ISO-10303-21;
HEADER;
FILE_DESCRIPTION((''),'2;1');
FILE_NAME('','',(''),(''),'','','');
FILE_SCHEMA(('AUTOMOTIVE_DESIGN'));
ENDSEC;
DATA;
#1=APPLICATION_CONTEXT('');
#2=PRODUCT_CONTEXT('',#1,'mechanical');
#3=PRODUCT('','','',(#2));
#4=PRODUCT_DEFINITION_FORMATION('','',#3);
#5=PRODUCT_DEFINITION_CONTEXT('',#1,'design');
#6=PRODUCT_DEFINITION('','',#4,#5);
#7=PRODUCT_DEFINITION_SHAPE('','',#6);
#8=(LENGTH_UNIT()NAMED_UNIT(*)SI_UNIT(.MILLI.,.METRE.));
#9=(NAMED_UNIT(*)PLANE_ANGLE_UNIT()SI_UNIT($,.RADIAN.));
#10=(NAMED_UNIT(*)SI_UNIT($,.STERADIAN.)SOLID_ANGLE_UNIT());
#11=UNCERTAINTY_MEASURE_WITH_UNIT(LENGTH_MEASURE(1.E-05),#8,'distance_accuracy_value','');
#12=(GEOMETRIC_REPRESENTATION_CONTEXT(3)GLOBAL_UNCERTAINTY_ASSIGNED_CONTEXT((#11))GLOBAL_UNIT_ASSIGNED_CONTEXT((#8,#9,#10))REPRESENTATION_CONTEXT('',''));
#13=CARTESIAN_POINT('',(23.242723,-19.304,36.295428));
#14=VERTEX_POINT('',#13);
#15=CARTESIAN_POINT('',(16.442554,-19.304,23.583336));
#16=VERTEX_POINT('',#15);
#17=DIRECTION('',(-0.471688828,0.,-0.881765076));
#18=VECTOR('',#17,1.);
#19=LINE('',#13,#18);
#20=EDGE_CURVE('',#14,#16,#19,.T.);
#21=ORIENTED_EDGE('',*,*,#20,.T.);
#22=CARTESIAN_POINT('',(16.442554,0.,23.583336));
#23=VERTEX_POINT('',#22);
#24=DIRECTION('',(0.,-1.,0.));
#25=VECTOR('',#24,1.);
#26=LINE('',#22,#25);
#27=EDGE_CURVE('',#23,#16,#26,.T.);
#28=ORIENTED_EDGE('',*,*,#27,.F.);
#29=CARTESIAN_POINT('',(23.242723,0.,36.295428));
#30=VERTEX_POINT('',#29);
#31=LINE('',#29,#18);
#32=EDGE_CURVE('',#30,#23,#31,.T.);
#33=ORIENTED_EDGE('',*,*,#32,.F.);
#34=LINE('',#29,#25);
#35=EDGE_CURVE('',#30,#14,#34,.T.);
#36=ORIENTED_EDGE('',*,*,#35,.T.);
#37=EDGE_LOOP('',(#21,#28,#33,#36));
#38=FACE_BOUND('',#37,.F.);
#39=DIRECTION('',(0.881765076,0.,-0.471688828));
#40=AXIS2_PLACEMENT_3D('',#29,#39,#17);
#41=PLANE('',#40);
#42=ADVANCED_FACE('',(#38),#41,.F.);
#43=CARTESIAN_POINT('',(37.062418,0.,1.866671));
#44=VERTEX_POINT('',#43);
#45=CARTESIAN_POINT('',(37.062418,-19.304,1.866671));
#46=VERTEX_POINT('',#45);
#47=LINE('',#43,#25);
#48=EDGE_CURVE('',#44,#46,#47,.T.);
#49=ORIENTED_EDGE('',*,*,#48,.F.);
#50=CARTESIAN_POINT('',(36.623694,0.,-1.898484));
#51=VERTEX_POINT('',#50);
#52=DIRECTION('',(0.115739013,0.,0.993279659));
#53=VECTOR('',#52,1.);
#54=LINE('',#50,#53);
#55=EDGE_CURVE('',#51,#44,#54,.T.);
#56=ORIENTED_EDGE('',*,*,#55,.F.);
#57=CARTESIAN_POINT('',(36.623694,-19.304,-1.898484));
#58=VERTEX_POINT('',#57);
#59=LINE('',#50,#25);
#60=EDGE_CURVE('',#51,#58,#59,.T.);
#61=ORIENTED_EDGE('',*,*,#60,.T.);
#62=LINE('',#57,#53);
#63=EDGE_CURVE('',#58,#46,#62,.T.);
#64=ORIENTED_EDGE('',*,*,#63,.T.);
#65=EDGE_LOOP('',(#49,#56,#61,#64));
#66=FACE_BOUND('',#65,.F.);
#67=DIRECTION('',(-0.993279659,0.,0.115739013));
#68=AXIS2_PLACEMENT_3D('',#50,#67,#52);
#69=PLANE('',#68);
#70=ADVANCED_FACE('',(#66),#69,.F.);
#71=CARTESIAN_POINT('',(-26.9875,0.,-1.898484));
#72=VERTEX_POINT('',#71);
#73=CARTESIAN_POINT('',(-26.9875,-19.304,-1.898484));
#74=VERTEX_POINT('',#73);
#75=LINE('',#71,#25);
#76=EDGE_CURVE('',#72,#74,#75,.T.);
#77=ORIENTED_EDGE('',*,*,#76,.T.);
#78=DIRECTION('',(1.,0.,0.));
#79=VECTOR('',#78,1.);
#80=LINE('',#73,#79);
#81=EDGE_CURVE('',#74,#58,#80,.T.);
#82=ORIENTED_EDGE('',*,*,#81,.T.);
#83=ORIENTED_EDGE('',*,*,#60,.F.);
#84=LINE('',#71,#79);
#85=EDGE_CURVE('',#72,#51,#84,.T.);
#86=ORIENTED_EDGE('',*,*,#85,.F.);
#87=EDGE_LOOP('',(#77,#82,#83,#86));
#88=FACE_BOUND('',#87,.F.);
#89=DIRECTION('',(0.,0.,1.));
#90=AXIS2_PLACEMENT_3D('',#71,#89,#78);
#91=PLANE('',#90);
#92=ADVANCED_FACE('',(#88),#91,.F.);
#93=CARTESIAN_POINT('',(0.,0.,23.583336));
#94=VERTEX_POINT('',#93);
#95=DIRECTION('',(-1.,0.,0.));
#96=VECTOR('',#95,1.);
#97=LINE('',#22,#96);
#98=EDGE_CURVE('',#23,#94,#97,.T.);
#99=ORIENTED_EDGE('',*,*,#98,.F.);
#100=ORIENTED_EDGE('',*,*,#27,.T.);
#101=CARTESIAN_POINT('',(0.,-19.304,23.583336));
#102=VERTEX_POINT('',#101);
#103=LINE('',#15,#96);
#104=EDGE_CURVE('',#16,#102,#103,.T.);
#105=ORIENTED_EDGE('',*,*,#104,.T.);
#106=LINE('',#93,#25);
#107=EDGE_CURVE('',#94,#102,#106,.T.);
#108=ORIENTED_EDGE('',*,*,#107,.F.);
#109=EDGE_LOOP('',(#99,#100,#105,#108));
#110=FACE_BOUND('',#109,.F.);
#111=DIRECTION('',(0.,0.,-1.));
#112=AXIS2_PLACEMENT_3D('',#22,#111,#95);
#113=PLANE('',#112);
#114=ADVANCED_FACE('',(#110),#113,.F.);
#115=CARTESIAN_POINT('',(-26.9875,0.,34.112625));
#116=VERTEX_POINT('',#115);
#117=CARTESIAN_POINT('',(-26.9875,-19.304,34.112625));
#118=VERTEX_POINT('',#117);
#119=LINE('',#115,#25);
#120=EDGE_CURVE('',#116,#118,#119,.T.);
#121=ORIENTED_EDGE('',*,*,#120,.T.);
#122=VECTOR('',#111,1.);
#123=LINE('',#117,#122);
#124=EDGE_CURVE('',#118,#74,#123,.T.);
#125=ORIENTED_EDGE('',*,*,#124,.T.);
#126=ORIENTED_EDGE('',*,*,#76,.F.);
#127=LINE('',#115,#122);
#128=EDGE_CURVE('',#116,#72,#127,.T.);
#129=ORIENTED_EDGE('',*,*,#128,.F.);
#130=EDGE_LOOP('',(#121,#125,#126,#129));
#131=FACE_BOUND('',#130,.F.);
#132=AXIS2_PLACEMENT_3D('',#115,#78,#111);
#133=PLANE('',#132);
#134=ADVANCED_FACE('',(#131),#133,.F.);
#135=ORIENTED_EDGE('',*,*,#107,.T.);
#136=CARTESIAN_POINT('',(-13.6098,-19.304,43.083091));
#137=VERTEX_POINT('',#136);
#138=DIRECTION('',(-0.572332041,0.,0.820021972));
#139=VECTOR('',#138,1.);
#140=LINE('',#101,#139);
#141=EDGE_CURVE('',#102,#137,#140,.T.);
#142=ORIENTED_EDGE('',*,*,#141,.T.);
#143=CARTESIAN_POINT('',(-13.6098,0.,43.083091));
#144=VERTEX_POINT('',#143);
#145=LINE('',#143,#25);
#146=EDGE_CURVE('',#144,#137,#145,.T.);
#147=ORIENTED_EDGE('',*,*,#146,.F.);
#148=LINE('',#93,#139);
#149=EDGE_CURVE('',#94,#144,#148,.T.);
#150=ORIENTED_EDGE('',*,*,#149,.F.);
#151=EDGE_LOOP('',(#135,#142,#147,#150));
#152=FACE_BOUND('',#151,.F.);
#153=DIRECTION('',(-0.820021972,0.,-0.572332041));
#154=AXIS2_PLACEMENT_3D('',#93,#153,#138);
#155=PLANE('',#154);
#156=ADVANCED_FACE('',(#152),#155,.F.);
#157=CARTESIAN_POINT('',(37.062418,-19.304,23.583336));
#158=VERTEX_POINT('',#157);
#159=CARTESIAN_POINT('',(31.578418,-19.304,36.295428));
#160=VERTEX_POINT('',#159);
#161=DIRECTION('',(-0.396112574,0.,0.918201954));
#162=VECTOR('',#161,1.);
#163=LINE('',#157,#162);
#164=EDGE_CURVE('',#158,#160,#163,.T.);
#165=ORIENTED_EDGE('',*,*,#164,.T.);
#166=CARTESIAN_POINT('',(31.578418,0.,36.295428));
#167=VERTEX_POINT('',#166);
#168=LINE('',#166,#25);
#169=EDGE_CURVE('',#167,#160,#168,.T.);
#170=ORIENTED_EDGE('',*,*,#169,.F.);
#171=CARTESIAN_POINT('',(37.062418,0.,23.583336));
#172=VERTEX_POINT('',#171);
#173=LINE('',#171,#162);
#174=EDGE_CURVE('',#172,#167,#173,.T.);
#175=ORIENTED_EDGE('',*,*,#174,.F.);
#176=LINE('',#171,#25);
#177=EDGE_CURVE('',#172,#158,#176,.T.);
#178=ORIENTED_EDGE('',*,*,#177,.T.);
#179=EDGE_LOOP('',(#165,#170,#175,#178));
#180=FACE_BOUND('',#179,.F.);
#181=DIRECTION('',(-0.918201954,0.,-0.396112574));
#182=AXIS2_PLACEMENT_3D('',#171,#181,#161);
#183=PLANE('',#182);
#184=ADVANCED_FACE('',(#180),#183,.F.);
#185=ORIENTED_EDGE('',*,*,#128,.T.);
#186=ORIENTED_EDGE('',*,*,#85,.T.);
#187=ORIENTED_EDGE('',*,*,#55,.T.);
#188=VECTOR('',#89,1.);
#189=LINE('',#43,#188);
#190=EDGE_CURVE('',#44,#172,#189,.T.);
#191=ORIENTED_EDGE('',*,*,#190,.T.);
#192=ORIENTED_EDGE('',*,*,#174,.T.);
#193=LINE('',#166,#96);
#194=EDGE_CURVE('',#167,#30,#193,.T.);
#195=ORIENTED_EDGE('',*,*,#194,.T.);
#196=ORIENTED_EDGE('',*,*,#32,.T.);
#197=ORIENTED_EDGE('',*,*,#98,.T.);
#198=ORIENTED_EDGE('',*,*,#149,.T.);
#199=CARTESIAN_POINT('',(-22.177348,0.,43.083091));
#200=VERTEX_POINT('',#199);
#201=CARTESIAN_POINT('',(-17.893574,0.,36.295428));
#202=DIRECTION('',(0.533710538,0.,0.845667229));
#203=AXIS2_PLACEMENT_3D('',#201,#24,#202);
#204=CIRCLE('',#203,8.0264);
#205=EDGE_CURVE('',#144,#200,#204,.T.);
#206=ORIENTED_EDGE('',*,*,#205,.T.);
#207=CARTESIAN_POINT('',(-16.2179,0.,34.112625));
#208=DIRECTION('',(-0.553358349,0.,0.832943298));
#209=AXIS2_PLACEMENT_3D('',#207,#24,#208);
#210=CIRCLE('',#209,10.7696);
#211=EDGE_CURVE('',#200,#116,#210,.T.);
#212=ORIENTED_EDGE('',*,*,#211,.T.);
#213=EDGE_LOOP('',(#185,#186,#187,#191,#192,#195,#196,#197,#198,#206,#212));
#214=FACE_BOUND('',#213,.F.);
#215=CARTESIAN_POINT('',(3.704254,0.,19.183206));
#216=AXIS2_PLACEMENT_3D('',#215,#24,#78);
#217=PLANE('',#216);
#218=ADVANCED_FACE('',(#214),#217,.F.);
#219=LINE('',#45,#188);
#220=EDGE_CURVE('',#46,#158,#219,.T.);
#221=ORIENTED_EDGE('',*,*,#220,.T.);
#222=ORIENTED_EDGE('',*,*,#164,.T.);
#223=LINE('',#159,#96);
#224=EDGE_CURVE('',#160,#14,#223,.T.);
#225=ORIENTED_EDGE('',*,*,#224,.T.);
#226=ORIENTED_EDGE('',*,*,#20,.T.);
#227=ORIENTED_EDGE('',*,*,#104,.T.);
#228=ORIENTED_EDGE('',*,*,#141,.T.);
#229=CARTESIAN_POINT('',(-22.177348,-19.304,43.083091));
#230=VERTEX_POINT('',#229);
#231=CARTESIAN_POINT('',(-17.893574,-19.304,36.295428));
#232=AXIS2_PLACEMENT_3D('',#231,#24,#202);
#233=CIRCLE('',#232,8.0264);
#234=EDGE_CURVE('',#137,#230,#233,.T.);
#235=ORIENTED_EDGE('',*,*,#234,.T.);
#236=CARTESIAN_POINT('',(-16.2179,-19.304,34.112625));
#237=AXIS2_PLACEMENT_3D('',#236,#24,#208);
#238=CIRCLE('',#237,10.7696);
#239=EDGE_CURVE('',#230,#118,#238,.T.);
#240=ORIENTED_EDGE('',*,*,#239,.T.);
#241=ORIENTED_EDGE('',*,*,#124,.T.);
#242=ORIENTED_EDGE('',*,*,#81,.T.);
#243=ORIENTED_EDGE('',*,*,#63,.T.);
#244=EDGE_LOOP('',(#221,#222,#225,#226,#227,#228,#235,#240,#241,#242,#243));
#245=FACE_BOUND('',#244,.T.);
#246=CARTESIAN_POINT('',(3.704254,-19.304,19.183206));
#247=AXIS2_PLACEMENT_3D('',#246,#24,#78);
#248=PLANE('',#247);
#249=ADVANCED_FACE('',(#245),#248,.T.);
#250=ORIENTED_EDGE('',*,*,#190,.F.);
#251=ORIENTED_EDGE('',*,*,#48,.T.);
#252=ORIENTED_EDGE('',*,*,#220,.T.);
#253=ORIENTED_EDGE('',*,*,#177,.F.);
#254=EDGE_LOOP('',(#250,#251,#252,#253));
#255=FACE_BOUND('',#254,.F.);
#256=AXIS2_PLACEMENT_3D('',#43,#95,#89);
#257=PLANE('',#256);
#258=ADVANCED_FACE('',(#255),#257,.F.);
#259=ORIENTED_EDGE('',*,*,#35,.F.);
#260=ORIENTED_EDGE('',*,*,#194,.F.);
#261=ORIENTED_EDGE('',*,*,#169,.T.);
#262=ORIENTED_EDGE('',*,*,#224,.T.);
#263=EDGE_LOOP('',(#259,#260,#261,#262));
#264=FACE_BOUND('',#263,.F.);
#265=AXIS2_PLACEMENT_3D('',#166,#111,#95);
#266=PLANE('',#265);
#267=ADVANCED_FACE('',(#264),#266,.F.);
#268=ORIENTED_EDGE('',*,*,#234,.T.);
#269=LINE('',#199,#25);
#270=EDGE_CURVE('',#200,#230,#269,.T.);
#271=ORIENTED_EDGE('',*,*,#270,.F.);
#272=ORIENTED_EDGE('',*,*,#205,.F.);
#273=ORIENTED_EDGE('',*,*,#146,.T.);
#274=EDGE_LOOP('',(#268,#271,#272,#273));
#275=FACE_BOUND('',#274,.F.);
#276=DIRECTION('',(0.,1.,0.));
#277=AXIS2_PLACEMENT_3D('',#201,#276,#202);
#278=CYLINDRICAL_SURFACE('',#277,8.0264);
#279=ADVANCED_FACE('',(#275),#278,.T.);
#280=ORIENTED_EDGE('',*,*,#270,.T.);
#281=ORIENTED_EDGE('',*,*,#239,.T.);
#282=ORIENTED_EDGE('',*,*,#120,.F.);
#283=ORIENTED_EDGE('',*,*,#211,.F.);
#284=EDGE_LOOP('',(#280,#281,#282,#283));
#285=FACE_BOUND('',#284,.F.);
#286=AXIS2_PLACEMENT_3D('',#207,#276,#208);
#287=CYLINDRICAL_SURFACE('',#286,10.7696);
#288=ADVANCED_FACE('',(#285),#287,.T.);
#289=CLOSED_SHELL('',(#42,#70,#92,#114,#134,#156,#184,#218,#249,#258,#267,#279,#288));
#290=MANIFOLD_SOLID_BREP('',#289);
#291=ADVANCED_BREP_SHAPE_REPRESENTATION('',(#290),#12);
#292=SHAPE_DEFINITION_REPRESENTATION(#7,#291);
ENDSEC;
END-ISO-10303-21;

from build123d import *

# Parameters (mm, degrees)
F1_DEPTH = 19.304


# Not quite as in the source:
# - the program builds the solid bodies; features that only make, move or delete a surface that nothing else refers to are left out


with BuildPart() as f1:
    # F0 (on Front) → F1 (new body)
    with BuildSketch(Plane.XZ):
        with BuildLine():
            Line((-26.9875, 34.112624824), (-26.9875, 1.898483652))
            Line((-26.9875, 1.898483652), (26.9875, 1.898483652))
            Line((26.9875, 1.898483652), (37.0624177158, 1.8666714896))
            Line((37.0624177158, 1.8666714896), (37.0624177158, 23.583335802))
            Line((37.0624177158, 23.583335802), (31.5784178674, 36.2954275192))
            Line((31.5784178674, 36.2954275192), (23.2427231967, 36.2954275192))
            Line((23.2427231967, 36.2954275192), (16.4425540715, 23.583335802))
            Line((16.4425540715, 23.583335802), (0, 23.583335802))
            Line((0, 23.583335802), (-13.6097995564, 43.0830909645))
            ThreePointArc((-13.6097995564, 43.0830909645), (-17.8935738167, 44.3218275192), (-22.177348077, 43.0830909645))
            ThreePointArc((-22.177348077, 43.0830909645), (-25.7090842299, 39.2019966984), (-26.9875, 34.112624824))
        make_face()
        Polygon((26.9875, 1.898483652), (-26.9875, 1.898483652), (-26.9875, -1.898483652), (26.9875, -1.898483652), (36.6236940026, -1.898483652), (37.0624177158, 1.8666714896), align=None)
    extrude(amount=F1_DEPTH)


solid = f1.part
